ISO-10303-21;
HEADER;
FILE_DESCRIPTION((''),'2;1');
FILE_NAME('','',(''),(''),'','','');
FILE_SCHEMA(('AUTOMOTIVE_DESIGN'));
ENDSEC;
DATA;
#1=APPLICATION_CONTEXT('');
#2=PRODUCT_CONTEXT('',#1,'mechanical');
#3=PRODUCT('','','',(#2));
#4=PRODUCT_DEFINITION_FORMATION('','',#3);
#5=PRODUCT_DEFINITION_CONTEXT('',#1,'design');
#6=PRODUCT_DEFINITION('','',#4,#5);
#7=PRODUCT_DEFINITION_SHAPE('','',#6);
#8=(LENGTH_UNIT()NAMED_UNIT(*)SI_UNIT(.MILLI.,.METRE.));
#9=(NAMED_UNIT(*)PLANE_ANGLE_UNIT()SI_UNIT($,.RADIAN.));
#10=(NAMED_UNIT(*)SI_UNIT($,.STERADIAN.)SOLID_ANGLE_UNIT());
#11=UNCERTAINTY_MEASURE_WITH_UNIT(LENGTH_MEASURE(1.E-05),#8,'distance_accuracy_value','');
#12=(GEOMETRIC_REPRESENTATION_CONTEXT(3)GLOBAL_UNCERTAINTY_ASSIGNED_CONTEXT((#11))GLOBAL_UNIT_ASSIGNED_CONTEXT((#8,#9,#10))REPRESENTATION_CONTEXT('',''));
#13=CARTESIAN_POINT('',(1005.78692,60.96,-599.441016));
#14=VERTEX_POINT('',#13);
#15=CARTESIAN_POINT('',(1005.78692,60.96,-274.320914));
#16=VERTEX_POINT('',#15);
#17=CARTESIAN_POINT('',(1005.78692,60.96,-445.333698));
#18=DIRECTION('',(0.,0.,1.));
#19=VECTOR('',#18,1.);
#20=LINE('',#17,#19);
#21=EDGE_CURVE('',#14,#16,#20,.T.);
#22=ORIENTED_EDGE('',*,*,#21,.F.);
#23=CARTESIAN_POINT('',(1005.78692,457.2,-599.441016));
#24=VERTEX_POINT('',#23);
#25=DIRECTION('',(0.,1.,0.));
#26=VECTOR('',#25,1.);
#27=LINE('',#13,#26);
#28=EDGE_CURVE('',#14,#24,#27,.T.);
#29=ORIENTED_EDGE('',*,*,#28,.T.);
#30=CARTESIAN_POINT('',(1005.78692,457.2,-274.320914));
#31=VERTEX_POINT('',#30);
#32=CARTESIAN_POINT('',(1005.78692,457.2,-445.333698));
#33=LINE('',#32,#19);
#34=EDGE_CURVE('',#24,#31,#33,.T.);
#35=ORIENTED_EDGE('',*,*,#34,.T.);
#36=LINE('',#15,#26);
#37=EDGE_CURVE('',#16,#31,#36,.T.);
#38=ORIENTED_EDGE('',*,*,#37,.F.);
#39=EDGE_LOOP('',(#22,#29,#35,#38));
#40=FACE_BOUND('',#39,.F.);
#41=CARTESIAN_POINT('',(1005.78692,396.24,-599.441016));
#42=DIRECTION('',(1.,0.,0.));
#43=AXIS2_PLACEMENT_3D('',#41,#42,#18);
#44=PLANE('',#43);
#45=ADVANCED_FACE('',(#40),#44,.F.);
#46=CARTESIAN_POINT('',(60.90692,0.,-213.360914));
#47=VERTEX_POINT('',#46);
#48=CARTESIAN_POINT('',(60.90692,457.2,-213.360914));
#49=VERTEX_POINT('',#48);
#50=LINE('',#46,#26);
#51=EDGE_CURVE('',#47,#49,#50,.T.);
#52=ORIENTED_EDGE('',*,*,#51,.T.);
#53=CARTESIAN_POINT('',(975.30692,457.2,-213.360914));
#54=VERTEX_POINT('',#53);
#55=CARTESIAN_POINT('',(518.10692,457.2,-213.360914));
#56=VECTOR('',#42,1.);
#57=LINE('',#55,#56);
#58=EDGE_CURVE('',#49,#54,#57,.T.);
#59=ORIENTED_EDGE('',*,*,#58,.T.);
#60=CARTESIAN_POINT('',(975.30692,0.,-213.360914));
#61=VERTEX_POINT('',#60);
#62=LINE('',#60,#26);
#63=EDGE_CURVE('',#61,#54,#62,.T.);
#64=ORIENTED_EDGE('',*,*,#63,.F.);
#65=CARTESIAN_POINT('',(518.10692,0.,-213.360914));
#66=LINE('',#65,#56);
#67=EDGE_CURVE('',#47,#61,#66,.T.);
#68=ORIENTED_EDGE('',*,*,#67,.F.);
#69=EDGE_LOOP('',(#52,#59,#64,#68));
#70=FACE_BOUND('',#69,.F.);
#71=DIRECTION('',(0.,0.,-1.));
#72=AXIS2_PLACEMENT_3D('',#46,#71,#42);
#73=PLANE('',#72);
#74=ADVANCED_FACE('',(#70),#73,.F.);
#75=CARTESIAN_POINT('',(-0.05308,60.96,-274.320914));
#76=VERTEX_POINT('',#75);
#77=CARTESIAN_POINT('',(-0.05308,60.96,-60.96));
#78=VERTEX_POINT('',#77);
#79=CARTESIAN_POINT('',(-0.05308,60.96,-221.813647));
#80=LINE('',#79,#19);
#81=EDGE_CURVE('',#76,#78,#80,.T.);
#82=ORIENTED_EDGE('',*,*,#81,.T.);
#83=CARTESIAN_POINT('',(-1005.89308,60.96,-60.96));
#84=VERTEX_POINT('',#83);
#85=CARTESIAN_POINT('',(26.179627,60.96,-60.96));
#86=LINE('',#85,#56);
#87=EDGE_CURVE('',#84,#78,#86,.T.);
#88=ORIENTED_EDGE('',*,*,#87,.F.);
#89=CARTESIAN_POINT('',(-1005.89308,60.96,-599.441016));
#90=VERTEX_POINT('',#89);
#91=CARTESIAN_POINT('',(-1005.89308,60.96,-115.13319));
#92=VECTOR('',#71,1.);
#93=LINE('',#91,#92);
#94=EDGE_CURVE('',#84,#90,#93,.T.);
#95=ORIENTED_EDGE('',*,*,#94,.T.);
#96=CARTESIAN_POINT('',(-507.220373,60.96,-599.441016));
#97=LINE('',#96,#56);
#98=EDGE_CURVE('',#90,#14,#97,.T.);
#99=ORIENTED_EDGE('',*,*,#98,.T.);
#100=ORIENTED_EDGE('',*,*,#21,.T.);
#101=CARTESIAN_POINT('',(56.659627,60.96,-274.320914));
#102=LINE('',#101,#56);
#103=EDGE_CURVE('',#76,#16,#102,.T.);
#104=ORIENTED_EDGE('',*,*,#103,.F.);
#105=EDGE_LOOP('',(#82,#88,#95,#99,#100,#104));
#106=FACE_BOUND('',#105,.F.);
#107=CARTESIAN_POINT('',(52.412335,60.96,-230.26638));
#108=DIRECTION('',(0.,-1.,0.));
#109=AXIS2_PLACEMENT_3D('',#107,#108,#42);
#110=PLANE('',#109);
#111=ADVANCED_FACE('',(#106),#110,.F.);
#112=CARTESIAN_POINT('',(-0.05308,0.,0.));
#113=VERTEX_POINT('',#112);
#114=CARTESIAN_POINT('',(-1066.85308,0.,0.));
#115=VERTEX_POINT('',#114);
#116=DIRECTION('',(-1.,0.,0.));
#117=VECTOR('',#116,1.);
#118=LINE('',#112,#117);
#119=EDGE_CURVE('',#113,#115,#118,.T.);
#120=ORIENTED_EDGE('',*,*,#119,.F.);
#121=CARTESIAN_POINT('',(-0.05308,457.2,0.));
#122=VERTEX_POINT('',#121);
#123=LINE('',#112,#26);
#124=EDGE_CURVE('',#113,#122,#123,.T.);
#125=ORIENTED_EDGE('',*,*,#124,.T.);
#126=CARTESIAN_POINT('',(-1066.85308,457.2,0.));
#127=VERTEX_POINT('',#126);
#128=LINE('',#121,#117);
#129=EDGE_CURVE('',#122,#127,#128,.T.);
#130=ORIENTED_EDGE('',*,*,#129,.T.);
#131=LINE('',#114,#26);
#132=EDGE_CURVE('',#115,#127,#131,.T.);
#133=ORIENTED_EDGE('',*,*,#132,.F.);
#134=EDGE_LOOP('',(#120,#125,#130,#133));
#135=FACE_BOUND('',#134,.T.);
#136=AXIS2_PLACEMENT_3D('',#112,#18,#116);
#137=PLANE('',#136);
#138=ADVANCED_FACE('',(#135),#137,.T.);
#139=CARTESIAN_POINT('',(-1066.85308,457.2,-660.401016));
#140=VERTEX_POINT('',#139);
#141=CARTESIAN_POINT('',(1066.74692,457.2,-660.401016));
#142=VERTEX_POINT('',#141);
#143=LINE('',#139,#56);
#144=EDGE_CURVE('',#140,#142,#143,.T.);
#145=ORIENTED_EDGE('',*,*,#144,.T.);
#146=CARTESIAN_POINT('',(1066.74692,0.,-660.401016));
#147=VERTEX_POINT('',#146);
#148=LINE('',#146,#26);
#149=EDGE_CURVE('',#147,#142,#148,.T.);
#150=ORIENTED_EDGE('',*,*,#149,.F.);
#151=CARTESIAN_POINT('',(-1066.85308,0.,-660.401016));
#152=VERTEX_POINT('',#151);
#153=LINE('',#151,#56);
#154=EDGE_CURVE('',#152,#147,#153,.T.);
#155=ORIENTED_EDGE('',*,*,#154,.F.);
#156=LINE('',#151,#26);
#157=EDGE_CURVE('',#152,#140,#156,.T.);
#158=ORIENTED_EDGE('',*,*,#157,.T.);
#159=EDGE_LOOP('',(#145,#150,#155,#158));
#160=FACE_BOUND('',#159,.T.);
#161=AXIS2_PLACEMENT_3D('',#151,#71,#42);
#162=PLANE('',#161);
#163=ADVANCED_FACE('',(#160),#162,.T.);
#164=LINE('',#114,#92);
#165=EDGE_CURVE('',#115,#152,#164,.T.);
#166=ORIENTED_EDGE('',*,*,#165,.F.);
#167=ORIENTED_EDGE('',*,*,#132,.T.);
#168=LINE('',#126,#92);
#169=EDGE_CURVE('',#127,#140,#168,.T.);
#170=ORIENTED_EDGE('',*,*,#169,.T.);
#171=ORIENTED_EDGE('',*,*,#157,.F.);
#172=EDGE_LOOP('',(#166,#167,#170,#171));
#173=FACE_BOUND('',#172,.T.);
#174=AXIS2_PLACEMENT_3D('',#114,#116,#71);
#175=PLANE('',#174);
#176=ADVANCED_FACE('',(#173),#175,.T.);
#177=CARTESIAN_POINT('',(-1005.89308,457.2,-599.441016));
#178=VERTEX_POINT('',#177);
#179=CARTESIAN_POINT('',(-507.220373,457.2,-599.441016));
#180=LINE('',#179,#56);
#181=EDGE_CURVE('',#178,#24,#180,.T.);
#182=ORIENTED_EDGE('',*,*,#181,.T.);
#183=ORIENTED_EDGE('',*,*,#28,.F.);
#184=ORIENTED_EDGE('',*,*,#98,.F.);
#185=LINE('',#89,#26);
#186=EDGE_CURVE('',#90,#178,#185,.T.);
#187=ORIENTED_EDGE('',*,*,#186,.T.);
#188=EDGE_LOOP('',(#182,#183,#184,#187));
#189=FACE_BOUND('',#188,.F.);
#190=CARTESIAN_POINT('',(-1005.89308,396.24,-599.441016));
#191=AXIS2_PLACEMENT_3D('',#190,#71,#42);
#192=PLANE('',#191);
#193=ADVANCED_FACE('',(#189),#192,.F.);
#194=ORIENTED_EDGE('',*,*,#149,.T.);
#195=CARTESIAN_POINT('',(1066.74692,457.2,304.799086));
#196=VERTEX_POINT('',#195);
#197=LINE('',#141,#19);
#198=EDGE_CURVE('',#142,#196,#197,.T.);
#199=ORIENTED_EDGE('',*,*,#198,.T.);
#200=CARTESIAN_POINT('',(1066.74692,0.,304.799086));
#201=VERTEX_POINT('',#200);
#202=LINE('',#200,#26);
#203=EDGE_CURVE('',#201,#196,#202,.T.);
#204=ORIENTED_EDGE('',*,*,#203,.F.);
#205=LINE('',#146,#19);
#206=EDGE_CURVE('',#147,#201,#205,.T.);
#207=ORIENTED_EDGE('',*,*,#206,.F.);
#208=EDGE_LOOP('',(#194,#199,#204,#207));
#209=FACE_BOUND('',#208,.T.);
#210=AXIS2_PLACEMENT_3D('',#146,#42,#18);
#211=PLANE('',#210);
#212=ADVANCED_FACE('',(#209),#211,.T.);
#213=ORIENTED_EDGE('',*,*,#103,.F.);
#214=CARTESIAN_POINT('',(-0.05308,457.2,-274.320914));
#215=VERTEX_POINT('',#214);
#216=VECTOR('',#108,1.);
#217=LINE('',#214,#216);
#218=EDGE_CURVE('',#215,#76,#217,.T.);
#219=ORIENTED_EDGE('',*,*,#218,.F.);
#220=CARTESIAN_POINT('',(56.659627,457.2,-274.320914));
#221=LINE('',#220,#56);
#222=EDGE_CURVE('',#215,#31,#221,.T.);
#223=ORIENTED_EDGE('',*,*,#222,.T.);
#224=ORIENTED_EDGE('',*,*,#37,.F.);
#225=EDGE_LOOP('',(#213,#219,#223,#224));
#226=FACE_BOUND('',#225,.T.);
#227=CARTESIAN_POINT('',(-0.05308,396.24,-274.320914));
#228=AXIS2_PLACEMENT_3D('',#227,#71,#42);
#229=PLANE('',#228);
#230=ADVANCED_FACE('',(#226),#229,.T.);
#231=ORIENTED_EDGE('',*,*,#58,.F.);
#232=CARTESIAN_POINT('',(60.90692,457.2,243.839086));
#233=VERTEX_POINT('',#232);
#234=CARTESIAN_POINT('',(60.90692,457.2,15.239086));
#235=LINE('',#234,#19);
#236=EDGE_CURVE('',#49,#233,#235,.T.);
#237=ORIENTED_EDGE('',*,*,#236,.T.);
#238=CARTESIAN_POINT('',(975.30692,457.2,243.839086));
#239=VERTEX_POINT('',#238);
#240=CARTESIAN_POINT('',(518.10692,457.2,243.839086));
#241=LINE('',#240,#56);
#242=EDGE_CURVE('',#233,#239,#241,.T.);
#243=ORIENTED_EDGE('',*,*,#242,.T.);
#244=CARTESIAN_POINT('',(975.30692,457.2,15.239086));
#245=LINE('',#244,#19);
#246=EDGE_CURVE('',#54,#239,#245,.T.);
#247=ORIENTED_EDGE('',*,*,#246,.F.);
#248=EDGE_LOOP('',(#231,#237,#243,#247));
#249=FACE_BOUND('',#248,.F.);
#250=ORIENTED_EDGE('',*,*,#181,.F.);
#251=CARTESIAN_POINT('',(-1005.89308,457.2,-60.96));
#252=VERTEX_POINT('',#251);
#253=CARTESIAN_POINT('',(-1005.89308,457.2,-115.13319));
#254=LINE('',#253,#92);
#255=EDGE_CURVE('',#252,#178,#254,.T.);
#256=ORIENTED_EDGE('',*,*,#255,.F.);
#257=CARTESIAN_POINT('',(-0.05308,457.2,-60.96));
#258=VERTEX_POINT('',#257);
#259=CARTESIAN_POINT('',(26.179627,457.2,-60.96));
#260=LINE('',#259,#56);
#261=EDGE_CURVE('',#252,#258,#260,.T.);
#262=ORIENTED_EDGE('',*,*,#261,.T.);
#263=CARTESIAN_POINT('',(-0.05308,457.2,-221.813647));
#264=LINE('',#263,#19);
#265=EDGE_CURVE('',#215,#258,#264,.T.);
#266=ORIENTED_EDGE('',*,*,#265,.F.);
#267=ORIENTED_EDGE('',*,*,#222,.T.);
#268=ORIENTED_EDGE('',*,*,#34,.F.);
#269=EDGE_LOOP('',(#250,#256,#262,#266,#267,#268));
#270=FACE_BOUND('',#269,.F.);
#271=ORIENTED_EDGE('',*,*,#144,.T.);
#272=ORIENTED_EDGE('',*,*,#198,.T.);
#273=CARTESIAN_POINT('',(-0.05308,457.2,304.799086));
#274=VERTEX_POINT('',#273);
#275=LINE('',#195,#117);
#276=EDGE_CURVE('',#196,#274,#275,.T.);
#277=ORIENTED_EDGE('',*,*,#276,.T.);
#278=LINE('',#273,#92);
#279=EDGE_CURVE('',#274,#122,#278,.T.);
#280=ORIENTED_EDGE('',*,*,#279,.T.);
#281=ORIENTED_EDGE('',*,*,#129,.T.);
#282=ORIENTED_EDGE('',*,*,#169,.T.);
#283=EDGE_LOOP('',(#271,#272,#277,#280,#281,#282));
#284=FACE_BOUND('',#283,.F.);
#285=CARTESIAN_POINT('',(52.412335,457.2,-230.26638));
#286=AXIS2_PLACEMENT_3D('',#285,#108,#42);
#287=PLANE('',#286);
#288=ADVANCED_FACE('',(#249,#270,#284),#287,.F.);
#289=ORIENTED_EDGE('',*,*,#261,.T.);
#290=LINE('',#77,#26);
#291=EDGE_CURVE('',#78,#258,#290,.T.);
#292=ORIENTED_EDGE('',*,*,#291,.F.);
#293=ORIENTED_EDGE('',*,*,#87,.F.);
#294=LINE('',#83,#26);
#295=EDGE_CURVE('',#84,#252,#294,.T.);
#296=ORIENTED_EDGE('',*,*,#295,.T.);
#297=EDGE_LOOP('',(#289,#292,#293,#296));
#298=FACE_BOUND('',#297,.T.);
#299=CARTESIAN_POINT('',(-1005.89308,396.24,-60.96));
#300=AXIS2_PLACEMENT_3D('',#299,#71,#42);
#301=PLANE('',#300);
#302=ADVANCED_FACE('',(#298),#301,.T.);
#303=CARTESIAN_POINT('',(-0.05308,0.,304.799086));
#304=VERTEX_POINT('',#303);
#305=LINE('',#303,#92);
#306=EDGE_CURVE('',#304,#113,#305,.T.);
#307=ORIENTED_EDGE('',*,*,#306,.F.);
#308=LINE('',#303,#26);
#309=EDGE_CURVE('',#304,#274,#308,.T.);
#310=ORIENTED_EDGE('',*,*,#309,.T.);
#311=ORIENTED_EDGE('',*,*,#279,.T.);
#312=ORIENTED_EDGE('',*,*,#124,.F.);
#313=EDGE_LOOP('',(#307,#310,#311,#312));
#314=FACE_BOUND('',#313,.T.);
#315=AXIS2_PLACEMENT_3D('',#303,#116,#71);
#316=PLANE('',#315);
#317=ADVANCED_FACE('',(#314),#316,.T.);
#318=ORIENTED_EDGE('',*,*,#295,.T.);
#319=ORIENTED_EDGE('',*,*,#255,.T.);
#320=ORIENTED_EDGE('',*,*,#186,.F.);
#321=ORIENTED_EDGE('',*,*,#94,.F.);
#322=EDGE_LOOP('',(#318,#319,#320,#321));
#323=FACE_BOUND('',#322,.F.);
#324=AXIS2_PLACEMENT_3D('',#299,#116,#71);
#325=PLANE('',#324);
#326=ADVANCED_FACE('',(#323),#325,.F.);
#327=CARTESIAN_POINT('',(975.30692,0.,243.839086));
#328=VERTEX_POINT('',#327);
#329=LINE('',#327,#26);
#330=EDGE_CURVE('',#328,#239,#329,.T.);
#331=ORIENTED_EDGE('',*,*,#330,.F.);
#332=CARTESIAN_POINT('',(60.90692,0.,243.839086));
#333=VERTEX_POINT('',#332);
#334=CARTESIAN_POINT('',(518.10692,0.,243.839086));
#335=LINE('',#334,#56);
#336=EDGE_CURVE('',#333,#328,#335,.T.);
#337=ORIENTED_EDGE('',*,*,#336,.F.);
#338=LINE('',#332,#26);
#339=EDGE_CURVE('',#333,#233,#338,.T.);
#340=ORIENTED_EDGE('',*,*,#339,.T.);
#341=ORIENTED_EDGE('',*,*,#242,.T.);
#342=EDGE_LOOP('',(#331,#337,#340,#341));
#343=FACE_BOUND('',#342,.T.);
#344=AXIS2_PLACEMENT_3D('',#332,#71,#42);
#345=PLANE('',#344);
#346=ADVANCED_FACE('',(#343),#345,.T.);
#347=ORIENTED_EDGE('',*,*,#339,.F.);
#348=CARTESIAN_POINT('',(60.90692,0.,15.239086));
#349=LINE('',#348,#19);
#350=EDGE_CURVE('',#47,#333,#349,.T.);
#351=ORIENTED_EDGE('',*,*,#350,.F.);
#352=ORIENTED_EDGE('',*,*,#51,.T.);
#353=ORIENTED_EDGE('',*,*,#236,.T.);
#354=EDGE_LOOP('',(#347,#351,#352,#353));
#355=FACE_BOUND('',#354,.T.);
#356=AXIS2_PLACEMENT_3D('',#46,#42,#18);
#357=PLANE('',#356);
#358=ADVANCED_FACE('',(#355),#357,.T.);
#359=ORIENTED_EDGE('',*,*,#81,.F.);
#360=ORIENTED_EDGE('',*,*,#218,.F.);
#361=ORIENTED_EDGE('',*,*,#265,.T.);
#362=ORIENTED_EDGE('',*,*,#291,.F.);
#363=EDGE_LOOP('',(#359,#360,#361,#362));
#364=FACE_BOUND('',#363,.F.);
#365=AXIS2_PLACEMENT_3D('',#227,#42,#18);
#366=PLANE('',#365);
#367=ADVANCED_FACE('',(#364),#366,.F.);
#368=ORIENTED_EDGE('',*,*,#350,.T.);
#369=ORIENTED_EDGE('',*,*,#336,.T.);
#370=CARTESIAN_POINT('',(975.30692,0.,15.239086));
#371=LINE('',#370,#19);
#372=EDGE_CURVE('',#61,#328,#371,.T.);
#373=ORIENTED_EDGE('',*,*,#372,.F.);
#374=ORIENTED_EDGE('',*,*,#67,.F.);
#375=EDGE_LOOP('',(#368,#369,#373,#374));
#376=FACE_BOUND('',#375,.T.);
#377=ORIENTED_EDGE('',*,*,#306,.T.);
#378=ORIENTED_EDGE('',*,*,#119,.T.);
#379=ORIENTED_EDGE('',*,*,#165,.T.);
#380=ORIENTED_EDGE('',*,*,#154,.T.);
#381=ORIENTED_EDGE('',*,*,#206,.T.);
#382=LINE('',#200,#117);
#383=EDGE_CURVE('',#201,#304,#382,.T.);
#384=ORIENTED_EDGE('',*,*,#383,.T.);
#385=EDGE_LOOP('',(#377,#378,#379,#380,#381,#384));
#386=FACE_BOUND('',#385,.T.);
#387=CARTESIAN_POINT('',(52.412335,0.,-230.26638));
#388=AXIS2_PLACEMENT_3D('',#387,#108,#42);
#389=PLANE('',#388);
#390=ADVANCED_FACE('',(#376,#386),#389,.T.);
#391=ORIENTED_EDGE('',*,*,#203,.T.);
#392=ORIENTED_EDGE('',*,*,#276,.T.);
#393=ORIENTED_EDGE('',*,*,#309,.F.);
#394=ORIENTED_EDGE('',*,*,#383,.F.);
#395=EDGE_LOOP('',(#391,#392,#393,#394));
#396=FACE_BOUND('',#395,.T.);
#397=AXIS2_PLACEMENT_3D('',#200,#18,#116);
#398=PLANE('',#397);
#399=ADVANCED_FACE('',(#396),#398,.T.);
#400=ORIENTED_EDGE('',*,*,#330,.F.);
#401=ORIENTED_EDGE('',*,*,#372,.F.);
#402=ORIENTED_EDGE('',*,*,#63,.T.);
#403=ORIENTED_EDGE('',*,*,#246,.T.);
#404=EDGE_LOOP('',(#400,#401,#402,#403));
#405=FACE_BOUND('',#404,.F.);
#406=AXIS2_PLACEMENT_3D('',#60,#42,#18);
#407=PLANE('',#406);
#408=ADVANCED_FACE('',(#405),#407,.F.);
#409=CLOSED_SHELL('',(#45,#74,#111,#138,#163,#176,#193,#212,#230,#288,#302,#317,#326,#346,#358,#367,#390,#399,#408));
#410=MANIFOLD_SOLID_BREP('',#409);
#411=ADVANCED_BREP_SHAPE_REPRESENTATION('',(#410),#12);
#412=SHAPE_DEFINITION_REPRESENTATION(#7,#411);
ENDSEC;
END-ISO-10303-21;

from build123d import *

# Parameters (mm, degrees)
F1_DEPTH = 457.2
F2_W     = 914.4
F2_H     = 457.2
F3_DEPTH = 457.2
F4_T     = -60.96


# Not quite as in the source:
# - a shell that OpenCascade refuses in one call is made with other operations: the cavity is built on its own and cut out


with BuildPart() as f1:
    # F0 (on Front) → F1 (new body)
    with BuildSketch(Plane.XZ):
        Polygon((-0.0530799283, 304.7990856), (-0.0530799283, 0), (-1066.8530799283, 0), (-1066.8530799283, -660.401016), (-0.0530799283, -660.401016), (1066.7469200717, -660.401016), (1066.7469200717, 304.7990856), align=None)
    extrude(amount=-F1_DEPTH)

    # F2 (on face) → F3 (cut, through all)
    with BuildSketch(Plane.XZ):
        with Locations((518.1069200717, 15.2390856)):
            Rectangle(F2_W, F2_H)
    extrude(amount=-F3_DEPTH, mode=Mode.SUBTRACT)

    # F4: a shell. OpenCascade refuses it in one call, so the cavity is built on its own and cut out:
    # the body offset inwards by the wall thickness, plus a prism from it out through each open face.
    f4_core = offset(f1.part, amount=F4_T, kind=Kind.INTERSECTION, mode=Mode.PRIVATE)
    f4_exits = [f4_core.faces().sort_by_distance(p)[0] for p in [
        (-124.304275, 396.24, -370.362523),
    ]]
    add(f4_core, mode=Mode.SUBTRACT)
    extrude(f4_exits, amount=-F4_T, mode=Mode.SUBTRACT)


solid = f1.part
